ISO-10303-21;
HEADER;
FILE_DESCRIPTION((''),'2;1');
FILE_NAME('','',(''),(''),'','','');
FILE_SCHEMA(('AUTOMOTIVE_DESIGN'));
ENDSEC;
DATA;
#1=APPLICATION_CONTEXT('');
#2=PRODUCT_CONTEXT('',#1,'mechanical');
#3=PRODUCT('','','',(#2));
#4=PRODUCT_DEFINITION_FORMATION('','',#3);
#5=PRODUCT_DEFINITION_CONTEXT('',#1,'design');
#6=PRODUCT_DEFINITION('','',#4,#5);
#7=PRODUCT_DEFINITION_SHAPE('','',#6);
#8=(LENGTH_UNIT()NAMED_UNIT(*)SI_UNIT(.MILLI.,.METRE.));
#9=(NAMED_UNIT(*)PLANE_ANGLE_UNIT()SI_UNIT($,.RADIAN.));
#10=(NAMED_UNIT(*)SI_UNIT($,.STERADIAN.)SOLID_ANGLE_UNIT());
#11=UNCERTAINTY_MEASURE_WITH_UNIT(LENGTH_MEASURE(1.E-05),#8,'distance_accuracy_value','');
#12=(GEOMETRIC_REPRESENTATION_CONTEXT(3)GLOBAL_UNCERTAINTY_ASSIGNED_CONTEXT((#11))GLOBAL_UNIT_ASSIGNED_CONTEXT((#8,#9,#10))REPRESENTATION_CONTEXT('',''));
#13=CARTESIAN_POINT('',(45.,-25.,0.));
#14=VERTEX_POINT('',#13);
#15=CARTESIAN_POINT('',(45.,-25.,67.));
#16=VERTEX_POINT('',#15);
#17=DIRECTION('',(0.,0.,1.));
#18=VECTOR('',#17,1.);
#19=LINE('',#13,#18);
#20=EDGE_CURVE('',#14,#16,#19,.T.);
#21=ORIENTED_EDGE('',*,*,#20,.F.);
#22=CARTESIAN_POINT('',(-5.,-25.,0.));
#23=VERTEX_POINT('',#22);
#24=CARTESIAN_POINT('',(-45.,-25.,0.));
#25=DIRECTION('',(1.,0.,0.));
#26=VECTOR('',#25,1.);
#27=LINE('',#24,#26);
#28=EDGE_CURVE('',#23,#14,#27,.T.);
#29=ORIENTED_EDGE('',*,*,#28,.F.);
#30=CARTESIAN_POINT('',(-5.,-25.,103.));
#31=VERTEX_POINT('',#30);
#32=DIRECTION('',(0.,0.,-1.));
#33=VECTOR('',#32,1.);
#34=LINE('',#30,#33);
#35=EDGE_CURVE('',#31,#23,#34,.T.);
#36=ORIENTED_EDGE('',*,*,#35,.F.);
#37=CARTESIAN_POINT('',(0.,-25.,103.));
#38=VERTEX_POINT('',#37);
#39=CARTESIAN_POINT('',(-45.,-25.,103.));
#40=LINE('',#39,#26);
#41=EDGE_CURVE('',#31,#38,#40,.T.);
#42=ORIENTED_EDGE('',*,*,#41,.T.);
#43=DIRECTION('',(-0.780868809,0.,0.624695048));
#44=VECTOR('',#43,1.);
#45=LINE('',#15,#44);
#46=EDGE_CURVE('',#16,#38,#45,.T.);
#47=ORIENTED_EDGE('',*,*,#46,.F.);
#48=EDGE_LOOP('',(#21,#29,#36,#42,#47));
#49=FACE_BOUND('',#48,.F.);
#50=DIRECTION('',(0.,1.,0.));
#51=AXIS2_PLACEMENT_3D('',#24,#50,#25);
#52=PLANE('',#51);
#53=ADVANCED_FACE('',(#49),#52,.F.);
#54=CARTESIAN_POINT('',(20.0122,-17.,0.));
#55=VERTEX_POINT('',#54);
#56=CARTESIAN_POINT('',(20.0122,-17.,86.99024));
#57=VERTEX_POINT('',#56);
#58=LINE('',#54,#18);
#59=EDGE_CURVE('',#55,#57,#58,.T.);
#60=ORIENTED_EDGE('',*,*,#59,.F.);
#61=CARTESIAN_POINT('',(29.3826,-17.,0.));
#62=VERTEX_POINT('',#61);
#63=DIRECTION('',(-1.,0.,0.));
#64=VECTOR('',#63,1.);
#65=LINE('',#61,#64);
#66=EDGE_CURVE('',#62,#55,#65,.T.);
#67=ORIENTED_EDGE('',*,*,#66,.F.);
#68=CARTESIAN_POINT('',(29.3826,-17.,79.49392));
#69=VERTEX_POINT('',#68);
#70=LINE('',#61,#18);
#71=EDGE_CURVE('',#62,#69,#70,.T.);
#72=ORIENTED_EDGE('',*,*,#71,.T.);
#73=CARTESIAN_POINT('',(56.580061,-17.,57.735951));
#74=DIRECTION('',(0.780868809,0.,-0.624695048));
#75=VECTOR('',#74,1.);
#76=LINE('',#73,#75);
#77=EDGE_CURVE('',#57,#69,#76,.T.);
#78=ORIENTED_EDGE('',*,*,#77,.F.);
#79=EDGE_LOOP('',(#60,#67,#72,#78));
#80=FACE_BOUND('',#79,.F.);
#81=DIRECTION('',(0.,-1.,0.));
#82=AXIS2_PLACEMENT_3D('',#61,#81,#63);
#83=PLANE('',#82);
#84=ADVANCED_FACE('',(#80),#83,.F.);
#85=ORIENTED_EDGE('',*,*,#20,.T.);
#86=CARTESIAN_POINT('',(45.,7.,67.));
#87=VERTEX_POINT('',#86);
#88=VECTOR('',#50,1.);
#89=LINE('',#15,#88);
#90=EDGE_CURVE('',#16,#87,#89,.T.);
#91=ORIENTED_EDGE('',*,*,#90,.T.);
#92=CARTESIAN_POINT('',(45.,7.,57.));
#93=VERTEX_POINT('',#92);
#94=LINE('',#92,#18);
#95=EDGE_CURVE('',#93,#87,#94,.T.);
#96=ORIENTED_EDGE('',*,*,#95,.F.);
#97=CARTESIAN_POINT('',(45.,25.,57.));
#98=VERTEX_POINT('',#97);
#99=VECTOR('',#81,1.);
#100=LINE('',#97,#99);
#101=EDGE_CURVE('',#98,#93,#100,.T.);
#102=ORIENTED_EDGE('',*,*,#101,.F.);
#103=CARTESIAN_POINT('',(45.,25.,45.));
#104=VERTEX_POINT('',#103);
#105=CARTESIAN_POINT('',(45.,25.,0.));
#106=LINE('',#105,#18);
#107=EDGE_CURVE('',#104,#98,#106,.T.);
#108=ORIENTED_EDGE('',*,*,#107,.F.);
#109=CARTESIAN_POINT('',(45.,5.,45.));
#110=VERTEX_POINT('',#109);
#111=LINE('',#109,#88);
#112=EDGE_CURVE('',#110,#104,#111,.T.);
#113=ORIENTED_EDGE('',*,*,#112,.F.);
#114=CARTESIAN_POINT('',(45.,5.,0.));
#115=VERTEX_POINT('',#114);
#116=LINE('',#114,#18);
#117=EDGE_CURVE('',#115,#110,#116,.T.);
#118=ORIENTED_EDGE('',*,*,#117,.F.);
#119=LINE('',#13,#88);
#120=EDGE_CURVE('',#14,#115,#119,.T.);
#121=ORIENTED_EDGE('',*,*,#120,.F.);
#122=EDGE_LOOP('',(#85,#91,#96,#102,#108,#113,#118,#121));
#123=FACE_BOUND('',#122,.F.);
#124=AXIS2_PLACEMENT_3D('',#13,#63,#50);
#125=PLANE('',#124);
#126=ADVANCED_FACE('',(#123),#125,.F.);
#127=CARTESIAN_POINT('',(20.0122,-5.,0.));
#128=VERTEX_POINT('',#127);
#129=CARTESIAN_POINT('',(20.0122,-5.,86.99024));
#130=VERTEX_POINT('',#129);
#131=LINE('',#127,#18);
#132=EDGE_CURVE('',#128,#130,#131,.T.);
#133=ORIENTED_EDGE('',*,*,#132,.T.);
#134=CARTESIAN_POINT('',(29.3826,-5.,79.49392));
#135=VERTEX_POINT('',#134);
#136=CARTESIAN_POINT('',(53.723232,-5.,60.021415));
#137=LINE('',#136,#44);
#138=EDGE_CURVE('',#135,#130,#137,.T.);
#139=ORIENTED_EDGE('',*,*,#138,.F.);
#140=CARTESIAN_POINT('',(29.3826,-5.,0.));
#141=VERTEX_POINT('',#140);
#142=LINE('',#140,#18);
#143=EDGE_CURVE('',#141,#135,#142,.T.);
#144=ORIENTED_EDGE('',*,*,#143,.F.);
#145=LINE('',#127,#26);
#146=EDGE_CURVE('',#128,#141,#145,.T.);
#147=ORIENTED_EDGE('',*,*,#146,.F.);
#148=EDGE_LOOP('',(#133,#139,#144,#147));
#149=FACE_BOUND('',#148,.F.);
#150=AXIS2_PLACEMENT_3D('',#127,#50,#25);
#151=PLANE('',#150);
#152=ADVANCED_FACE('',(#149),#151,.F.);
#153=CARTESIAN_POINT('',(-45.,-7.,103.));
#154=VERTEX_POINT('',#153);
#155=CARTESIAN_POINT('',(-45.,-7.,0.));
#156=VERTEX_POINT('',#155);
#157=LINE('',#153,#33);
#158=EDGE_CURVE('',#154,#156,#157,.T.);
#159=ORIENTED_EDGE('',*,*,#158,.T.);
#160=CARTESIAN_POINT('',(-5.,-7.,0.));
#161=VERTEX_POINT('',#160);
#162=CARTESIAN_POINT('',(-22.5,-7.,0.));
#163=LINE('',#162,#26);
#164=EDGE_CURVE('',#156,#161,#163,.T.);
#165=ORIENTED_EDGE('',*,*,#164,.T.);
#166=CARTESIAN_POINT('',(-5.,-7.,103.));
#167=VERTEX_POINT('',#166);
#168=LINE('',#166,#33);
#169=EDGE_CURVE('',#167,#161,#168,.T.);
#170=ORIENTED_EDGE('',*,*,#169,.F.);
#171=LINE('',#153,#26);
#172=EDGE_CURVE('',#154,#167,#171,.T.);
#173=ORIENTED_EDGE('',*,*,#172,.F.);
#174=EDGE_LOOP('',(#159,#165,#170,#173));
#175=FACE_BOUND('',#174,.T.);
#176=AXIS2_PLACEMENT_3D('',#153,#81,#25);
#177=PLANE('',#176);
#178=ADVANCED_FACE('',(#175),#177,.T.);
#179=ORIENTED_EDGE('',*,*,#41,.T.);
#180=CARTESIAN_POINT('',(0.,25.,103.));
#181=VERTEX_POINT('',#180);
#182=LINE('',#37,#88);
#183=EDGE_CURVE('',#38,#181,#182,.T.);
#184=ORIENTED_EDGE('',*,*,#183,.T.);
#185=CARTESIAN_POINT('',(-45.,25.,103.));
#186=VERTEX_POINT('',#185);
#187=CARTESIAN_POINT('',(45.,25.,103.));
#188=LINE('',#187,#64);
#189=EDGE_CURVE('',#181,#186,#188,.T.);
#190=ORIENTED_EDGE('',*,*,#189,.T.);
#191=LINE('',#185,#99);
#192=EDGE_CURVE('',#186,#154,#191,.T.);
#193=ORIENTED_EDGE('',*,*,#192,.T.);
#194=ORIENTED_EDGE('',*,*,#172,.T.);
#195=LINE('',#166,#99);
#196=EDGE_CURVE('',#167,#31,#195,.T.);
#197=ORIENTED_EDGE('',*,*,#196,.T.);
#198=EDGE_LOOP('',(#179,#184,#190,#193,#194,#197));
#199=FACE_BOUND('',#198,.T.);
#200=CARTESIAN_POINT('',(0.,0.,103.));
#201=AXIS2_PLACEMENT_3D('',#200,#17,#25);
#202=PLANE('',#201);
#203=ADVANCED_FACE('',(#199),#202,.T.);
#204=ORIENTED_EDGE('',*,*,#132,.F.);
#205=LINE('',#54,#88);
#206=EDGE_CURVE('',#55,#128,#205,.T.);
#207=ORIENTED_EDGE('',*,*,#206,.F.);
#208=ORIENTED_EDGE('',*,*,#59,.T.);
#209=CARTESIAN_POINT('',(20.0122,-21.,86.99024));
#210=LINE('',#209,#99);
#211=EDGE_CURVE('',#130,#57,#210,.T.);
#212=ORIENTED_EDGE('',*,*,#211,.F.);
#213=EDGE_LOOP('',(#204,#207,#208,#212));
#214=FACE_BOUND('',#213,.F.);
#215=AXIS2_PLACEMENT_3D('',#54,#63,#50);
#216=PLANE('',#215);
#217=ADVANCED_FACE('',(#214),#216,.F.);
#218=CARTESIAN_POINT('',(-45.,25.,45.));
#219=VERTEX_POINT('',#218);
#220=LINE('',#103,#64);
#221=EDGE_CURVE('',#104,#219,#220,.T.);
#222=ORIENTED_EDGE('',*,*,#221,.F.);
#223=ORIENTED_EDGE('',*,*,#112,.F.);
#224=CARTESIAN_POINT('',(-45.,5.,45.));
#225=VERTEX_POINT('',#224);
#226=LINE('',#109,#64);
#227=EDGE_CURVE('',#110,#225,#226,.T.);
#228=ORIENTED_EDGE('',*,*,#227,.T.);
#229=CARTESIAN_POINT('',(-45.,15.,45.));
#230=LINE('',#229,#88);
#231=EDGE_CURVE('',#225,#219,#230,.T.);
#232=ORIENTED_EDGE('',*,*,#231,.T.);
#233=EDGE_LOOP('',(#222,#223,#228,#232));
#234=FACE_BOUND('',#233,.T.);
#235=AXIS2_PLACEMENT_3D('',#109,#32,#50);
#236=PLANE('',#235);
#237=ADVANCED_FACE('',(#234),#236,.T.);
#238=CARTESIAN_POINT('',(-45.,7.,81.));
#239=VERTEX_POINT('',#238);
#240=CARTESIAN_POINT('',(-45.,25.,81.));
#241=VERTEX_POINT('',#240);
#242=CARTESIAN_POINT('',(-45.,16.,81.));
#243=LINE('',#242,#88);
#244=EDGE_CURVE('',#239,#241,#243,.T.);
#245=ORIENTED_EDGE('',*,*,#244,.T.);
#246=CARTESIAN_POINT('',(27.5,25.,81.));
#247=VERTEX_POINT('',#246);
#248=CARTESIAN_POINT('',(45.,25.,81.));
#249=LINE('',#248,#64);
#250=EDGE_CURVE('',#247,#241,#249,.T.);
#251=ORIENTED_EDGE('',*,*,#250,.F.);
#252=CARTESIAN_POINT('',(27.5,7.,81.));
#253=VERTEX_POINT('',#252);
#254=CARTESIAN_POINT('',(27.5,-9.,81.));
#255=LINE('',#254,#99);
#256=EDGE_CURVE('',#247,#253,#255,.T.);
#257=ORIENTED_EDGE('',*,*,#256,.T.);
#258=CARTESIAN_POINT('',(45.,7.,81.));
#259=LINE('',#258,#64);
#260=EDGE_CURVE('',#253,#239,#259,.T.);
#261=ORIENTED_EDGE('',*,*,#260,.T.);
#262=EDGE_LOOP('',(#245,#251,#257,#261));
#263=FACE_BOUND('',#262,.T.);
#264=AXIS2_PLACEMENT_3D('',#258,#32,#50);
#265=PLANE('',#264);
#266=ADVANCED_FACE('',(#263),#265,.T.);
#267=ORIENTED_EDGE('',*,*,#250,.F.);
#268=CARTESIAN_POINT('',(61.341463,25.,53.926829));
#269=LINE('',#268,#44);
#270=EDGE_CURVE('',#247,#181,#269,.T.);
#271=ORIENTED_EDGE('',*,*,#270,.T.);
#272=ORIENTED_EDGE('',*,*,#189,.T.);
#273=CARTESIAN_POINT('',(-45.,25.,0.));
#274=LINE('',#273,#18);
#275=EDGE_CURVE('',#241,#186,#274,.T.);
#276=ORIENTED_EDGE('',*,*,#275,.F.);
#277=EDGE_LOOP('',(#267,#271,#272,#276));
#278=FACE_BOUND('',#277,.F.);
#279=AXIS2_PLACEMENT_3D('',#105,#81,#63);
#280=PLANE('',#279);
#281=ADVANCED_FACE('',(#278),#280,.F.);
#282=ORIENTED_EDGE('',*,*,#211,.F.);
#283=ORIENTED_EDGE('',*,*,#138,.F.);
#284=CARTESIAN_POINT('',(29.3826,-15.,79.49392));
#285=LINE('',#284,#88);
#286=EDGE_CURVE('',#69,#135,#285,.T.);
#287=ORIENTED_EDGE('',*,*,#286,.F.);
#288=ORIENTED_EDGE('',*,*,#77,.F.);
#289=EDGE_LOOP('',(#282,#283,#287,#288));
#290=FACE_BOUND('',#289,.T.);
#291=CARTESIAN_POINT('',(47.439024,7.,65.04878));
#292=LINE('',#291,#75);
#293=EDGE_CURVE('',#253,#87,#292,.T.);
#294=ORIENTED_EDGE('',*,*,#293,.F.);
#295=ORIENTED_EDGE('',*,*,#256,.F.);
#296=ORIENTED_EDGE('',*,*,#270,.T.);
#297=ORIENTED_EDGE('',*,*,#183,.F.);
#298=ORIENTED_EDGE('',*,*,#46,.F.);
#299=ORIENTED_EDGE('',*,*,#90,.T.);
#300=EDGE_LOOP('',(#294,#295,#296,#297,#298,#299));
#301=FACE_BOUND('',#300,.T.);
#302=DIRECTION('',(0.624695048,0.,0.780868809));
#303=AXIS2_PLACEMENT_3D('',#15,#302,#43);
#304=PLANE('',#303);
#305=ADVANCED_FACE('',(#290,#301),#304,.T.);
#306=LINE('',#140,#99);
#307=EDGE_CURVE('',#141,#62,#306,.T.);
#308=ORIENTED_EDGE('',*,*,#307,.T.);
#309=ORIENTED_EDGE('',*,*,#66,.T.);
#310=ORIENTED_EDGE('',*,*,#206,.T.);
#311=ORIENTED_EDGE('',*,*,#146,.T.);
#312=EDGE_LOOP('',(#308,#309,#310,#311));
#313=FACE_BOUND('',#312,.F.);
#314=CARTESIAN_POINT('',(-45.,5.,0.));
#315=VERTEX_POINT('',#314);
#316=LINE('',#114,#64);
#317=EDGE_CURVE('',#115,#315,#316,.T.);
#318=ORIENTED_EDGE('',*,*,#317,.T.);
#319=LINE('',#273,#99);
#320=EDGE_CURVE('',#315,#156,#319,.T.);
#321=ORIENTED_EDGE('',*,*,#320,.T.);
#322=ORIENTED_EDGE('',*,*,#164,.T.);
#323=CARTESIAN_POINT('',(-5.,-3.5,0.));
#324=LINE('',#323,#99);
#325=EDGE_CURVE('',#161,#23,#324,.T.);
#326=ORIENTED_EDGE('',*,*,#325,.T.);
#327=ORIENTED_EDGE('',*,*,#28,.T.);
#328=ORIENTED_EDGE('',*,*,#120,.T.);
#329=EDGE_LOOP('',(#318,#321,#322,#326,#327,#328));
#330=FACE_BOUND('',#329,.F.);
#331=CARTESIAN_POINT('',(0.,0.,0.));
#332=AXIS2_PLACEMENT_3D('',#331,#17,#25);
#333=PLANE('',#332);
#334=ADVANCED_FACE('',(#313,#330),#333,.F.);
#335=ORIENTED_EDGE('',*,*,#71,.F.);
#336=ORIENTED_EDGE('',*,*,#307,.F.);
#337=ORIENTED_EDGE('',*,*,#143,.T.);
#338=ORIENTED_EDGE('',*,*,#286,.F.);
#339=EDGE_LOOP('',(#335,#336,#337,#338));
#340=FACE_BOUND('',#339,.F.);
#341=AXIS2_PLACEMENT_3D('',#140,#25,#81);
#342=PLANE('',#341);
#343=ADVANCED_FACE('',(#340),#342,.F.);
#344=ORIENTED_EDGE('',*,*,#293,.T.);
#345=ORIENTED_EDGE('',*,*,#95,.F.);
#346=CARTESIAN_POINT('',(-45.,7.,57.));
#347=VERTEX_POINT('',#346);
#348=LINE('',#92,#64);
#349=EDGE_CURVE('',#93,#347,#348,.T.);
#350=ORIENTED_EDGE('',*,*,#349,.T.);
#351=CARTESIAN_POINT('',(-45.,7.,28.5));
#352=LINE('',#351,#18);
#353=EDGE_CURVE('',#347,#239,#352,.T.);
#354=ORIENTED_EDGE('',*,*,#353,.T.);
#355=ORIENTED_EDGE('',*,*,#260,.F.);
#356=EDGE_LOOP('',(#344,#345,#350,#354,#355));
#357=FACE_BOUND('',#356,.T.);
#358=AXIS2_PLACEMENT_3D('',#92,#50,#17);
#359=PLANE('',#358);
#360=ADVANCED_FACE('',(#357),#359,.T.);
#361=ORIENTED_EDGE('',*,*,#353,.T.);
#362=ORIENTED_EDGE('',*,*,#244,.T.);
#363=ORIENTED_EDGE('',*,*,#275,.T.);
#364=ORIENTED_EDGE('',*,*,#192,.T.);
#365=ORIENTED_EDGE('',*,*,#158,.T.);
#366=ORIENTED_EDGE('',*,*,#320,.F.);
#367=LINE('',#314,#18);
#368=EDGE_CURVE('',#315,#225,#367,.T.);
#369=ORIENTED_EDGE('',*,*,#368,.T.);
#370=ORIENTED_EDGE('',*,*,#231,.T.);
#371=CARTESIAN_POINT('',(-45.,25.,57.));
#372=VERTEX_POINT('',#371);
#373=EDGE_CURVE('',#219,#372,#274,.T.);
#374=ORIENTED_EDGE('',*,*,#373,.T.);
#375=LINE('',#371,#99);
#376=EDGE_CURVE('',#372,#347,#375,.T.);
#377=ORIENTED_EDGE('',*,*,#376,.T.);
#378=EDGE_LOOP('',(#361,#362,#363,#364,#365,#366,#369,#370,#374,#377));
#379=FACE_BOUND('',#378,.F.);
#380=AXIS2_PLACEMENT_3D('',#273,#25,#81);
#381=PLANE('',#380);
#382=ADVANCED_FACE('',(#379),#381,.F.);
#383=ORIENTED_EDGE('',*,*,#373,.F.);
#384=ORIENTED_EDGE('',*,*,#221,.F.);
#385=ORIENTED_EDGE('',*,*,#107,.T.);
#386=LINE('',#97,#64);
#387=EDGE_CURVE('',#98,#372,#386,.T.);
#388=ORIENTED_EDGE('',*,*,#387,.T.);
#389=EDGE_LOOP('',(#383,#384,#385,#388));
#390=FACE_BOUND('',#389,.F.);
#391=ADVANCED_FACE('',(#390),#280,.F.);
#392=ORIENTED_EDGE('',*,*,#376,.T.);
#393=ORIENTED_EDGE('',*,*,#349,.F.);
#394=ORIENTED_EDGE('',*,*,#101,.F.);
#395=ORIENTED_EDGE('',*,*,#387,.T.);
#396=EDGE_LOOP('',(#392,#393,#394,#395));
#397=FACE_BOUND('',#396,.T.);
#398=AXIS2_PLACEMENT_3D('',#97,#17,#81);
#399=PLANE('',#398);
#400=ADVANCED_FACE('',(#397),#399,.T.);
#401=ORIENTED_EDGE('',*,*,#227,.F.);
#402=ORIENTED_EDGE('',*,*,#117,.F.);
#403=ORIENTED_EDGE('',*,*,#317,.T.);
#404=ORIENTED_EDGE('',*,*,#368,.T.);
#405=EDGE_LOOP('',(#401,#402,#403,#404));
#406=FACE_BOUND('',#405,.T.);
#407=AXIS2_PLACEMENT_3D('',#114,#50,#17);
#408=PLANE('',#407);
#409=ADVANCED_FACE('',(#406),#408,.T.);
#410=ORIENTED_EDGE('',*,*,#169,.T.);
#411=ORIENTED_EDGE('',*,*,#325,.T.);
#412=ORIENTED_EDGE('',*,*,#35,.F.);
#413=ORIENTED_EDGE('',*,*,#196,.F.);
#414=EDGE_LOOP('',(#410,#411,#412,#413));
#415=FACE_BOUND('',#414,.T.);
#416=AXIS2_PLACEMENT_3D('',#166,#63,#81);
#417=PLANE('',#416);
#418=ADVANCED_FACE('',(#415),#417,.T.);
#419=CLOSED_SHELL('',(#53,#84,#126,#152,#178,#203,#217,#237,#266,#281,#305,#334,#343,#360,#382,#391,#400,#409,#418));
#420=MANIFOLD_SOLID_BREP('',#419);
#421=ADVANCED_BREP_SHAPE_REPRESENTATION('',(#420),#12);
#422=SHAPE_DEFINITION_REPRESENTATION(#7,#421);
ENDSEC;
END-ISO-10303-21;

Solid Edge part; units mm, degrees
sketch "Sketch1" plane through (0, 0, 0) normal (0, 0, 1) x (1, 0, 0)
  line L0 (45, 25) -> (-45, 25)
  line L1 (-45, 25) -> (-45, -25)
  line L2 (-45, -25) -> (45, -25)
  line L3 (45, -25) -> (45, 25)
extrude "Protrusion1" add sketch "Sketch1" along normal blind 103
sketch "Sketch2" plane through (45, 0, 51.5) normal (1, 0, 0) x (0, 1, 0)
  line L0 (7, 29.5) -> (25, 29.5)
  line L1 (7, 5.5) -> (7, 29.5)
  line L2 (25, 5.5) -> (7, 5.5)
extrude "Cutout1" cut sketch "Sketch2" against normal through all material side at (45, 16, 80.95)
sketch "Sketch3" plane through (0, -25, 51.5) normal (0, -1, 0) x (1, 0, 0)
  line L0 (45, 15.5) -> (0, 51.5)
extrude "Cutout2" cut sketch "Sketch3" against normal through all material side at (22.5312, -25, 85.039)
sketch "Sketch4" plane through (0, 0, 103) normal (0, 0, 1) x (0, 1, 0)
  line L0 (-7, 5) -> (-25, 5)
  line L1 (-7, 45) -> (-7, 5)
  line L2 (-25, 45) -> (-7, 45)
extrude "Cutout3" cut sketch "Sketch4" against normal through all material side at (-5.05, -16, 103)
sketch "Sketch5" plane through (0, -9, 0) normal (0, 0, -1) x (0, 1, 0)
  line L0 (-8, 29.3826) -> (-8, 20.0122)
  line L1 (-8, 20.0122) -> (4, 20.0122)
  line L2 (4, 20.0122) -> (4, 29.3826)
  line L3 (4, 29.3826) -> (-8, 29.3826)
extrude "Cutout4" cut sketch "Sketch5" against normal through all
sketch "Sketch6" plane through (45, 0, 51.5) normal (1, 0, 0) x (0, 1, 0)
  line L0 (5, -6.5) -> (25, -6.5)
  line L1 (5, -51.5) -> (5, -6.5)
  line L2 (25, -51.5) -> (5, -51.5)
extrude "Cutout5" cut sketch "Sketch6" against normal through all material side at (45, 15, 44.95)
